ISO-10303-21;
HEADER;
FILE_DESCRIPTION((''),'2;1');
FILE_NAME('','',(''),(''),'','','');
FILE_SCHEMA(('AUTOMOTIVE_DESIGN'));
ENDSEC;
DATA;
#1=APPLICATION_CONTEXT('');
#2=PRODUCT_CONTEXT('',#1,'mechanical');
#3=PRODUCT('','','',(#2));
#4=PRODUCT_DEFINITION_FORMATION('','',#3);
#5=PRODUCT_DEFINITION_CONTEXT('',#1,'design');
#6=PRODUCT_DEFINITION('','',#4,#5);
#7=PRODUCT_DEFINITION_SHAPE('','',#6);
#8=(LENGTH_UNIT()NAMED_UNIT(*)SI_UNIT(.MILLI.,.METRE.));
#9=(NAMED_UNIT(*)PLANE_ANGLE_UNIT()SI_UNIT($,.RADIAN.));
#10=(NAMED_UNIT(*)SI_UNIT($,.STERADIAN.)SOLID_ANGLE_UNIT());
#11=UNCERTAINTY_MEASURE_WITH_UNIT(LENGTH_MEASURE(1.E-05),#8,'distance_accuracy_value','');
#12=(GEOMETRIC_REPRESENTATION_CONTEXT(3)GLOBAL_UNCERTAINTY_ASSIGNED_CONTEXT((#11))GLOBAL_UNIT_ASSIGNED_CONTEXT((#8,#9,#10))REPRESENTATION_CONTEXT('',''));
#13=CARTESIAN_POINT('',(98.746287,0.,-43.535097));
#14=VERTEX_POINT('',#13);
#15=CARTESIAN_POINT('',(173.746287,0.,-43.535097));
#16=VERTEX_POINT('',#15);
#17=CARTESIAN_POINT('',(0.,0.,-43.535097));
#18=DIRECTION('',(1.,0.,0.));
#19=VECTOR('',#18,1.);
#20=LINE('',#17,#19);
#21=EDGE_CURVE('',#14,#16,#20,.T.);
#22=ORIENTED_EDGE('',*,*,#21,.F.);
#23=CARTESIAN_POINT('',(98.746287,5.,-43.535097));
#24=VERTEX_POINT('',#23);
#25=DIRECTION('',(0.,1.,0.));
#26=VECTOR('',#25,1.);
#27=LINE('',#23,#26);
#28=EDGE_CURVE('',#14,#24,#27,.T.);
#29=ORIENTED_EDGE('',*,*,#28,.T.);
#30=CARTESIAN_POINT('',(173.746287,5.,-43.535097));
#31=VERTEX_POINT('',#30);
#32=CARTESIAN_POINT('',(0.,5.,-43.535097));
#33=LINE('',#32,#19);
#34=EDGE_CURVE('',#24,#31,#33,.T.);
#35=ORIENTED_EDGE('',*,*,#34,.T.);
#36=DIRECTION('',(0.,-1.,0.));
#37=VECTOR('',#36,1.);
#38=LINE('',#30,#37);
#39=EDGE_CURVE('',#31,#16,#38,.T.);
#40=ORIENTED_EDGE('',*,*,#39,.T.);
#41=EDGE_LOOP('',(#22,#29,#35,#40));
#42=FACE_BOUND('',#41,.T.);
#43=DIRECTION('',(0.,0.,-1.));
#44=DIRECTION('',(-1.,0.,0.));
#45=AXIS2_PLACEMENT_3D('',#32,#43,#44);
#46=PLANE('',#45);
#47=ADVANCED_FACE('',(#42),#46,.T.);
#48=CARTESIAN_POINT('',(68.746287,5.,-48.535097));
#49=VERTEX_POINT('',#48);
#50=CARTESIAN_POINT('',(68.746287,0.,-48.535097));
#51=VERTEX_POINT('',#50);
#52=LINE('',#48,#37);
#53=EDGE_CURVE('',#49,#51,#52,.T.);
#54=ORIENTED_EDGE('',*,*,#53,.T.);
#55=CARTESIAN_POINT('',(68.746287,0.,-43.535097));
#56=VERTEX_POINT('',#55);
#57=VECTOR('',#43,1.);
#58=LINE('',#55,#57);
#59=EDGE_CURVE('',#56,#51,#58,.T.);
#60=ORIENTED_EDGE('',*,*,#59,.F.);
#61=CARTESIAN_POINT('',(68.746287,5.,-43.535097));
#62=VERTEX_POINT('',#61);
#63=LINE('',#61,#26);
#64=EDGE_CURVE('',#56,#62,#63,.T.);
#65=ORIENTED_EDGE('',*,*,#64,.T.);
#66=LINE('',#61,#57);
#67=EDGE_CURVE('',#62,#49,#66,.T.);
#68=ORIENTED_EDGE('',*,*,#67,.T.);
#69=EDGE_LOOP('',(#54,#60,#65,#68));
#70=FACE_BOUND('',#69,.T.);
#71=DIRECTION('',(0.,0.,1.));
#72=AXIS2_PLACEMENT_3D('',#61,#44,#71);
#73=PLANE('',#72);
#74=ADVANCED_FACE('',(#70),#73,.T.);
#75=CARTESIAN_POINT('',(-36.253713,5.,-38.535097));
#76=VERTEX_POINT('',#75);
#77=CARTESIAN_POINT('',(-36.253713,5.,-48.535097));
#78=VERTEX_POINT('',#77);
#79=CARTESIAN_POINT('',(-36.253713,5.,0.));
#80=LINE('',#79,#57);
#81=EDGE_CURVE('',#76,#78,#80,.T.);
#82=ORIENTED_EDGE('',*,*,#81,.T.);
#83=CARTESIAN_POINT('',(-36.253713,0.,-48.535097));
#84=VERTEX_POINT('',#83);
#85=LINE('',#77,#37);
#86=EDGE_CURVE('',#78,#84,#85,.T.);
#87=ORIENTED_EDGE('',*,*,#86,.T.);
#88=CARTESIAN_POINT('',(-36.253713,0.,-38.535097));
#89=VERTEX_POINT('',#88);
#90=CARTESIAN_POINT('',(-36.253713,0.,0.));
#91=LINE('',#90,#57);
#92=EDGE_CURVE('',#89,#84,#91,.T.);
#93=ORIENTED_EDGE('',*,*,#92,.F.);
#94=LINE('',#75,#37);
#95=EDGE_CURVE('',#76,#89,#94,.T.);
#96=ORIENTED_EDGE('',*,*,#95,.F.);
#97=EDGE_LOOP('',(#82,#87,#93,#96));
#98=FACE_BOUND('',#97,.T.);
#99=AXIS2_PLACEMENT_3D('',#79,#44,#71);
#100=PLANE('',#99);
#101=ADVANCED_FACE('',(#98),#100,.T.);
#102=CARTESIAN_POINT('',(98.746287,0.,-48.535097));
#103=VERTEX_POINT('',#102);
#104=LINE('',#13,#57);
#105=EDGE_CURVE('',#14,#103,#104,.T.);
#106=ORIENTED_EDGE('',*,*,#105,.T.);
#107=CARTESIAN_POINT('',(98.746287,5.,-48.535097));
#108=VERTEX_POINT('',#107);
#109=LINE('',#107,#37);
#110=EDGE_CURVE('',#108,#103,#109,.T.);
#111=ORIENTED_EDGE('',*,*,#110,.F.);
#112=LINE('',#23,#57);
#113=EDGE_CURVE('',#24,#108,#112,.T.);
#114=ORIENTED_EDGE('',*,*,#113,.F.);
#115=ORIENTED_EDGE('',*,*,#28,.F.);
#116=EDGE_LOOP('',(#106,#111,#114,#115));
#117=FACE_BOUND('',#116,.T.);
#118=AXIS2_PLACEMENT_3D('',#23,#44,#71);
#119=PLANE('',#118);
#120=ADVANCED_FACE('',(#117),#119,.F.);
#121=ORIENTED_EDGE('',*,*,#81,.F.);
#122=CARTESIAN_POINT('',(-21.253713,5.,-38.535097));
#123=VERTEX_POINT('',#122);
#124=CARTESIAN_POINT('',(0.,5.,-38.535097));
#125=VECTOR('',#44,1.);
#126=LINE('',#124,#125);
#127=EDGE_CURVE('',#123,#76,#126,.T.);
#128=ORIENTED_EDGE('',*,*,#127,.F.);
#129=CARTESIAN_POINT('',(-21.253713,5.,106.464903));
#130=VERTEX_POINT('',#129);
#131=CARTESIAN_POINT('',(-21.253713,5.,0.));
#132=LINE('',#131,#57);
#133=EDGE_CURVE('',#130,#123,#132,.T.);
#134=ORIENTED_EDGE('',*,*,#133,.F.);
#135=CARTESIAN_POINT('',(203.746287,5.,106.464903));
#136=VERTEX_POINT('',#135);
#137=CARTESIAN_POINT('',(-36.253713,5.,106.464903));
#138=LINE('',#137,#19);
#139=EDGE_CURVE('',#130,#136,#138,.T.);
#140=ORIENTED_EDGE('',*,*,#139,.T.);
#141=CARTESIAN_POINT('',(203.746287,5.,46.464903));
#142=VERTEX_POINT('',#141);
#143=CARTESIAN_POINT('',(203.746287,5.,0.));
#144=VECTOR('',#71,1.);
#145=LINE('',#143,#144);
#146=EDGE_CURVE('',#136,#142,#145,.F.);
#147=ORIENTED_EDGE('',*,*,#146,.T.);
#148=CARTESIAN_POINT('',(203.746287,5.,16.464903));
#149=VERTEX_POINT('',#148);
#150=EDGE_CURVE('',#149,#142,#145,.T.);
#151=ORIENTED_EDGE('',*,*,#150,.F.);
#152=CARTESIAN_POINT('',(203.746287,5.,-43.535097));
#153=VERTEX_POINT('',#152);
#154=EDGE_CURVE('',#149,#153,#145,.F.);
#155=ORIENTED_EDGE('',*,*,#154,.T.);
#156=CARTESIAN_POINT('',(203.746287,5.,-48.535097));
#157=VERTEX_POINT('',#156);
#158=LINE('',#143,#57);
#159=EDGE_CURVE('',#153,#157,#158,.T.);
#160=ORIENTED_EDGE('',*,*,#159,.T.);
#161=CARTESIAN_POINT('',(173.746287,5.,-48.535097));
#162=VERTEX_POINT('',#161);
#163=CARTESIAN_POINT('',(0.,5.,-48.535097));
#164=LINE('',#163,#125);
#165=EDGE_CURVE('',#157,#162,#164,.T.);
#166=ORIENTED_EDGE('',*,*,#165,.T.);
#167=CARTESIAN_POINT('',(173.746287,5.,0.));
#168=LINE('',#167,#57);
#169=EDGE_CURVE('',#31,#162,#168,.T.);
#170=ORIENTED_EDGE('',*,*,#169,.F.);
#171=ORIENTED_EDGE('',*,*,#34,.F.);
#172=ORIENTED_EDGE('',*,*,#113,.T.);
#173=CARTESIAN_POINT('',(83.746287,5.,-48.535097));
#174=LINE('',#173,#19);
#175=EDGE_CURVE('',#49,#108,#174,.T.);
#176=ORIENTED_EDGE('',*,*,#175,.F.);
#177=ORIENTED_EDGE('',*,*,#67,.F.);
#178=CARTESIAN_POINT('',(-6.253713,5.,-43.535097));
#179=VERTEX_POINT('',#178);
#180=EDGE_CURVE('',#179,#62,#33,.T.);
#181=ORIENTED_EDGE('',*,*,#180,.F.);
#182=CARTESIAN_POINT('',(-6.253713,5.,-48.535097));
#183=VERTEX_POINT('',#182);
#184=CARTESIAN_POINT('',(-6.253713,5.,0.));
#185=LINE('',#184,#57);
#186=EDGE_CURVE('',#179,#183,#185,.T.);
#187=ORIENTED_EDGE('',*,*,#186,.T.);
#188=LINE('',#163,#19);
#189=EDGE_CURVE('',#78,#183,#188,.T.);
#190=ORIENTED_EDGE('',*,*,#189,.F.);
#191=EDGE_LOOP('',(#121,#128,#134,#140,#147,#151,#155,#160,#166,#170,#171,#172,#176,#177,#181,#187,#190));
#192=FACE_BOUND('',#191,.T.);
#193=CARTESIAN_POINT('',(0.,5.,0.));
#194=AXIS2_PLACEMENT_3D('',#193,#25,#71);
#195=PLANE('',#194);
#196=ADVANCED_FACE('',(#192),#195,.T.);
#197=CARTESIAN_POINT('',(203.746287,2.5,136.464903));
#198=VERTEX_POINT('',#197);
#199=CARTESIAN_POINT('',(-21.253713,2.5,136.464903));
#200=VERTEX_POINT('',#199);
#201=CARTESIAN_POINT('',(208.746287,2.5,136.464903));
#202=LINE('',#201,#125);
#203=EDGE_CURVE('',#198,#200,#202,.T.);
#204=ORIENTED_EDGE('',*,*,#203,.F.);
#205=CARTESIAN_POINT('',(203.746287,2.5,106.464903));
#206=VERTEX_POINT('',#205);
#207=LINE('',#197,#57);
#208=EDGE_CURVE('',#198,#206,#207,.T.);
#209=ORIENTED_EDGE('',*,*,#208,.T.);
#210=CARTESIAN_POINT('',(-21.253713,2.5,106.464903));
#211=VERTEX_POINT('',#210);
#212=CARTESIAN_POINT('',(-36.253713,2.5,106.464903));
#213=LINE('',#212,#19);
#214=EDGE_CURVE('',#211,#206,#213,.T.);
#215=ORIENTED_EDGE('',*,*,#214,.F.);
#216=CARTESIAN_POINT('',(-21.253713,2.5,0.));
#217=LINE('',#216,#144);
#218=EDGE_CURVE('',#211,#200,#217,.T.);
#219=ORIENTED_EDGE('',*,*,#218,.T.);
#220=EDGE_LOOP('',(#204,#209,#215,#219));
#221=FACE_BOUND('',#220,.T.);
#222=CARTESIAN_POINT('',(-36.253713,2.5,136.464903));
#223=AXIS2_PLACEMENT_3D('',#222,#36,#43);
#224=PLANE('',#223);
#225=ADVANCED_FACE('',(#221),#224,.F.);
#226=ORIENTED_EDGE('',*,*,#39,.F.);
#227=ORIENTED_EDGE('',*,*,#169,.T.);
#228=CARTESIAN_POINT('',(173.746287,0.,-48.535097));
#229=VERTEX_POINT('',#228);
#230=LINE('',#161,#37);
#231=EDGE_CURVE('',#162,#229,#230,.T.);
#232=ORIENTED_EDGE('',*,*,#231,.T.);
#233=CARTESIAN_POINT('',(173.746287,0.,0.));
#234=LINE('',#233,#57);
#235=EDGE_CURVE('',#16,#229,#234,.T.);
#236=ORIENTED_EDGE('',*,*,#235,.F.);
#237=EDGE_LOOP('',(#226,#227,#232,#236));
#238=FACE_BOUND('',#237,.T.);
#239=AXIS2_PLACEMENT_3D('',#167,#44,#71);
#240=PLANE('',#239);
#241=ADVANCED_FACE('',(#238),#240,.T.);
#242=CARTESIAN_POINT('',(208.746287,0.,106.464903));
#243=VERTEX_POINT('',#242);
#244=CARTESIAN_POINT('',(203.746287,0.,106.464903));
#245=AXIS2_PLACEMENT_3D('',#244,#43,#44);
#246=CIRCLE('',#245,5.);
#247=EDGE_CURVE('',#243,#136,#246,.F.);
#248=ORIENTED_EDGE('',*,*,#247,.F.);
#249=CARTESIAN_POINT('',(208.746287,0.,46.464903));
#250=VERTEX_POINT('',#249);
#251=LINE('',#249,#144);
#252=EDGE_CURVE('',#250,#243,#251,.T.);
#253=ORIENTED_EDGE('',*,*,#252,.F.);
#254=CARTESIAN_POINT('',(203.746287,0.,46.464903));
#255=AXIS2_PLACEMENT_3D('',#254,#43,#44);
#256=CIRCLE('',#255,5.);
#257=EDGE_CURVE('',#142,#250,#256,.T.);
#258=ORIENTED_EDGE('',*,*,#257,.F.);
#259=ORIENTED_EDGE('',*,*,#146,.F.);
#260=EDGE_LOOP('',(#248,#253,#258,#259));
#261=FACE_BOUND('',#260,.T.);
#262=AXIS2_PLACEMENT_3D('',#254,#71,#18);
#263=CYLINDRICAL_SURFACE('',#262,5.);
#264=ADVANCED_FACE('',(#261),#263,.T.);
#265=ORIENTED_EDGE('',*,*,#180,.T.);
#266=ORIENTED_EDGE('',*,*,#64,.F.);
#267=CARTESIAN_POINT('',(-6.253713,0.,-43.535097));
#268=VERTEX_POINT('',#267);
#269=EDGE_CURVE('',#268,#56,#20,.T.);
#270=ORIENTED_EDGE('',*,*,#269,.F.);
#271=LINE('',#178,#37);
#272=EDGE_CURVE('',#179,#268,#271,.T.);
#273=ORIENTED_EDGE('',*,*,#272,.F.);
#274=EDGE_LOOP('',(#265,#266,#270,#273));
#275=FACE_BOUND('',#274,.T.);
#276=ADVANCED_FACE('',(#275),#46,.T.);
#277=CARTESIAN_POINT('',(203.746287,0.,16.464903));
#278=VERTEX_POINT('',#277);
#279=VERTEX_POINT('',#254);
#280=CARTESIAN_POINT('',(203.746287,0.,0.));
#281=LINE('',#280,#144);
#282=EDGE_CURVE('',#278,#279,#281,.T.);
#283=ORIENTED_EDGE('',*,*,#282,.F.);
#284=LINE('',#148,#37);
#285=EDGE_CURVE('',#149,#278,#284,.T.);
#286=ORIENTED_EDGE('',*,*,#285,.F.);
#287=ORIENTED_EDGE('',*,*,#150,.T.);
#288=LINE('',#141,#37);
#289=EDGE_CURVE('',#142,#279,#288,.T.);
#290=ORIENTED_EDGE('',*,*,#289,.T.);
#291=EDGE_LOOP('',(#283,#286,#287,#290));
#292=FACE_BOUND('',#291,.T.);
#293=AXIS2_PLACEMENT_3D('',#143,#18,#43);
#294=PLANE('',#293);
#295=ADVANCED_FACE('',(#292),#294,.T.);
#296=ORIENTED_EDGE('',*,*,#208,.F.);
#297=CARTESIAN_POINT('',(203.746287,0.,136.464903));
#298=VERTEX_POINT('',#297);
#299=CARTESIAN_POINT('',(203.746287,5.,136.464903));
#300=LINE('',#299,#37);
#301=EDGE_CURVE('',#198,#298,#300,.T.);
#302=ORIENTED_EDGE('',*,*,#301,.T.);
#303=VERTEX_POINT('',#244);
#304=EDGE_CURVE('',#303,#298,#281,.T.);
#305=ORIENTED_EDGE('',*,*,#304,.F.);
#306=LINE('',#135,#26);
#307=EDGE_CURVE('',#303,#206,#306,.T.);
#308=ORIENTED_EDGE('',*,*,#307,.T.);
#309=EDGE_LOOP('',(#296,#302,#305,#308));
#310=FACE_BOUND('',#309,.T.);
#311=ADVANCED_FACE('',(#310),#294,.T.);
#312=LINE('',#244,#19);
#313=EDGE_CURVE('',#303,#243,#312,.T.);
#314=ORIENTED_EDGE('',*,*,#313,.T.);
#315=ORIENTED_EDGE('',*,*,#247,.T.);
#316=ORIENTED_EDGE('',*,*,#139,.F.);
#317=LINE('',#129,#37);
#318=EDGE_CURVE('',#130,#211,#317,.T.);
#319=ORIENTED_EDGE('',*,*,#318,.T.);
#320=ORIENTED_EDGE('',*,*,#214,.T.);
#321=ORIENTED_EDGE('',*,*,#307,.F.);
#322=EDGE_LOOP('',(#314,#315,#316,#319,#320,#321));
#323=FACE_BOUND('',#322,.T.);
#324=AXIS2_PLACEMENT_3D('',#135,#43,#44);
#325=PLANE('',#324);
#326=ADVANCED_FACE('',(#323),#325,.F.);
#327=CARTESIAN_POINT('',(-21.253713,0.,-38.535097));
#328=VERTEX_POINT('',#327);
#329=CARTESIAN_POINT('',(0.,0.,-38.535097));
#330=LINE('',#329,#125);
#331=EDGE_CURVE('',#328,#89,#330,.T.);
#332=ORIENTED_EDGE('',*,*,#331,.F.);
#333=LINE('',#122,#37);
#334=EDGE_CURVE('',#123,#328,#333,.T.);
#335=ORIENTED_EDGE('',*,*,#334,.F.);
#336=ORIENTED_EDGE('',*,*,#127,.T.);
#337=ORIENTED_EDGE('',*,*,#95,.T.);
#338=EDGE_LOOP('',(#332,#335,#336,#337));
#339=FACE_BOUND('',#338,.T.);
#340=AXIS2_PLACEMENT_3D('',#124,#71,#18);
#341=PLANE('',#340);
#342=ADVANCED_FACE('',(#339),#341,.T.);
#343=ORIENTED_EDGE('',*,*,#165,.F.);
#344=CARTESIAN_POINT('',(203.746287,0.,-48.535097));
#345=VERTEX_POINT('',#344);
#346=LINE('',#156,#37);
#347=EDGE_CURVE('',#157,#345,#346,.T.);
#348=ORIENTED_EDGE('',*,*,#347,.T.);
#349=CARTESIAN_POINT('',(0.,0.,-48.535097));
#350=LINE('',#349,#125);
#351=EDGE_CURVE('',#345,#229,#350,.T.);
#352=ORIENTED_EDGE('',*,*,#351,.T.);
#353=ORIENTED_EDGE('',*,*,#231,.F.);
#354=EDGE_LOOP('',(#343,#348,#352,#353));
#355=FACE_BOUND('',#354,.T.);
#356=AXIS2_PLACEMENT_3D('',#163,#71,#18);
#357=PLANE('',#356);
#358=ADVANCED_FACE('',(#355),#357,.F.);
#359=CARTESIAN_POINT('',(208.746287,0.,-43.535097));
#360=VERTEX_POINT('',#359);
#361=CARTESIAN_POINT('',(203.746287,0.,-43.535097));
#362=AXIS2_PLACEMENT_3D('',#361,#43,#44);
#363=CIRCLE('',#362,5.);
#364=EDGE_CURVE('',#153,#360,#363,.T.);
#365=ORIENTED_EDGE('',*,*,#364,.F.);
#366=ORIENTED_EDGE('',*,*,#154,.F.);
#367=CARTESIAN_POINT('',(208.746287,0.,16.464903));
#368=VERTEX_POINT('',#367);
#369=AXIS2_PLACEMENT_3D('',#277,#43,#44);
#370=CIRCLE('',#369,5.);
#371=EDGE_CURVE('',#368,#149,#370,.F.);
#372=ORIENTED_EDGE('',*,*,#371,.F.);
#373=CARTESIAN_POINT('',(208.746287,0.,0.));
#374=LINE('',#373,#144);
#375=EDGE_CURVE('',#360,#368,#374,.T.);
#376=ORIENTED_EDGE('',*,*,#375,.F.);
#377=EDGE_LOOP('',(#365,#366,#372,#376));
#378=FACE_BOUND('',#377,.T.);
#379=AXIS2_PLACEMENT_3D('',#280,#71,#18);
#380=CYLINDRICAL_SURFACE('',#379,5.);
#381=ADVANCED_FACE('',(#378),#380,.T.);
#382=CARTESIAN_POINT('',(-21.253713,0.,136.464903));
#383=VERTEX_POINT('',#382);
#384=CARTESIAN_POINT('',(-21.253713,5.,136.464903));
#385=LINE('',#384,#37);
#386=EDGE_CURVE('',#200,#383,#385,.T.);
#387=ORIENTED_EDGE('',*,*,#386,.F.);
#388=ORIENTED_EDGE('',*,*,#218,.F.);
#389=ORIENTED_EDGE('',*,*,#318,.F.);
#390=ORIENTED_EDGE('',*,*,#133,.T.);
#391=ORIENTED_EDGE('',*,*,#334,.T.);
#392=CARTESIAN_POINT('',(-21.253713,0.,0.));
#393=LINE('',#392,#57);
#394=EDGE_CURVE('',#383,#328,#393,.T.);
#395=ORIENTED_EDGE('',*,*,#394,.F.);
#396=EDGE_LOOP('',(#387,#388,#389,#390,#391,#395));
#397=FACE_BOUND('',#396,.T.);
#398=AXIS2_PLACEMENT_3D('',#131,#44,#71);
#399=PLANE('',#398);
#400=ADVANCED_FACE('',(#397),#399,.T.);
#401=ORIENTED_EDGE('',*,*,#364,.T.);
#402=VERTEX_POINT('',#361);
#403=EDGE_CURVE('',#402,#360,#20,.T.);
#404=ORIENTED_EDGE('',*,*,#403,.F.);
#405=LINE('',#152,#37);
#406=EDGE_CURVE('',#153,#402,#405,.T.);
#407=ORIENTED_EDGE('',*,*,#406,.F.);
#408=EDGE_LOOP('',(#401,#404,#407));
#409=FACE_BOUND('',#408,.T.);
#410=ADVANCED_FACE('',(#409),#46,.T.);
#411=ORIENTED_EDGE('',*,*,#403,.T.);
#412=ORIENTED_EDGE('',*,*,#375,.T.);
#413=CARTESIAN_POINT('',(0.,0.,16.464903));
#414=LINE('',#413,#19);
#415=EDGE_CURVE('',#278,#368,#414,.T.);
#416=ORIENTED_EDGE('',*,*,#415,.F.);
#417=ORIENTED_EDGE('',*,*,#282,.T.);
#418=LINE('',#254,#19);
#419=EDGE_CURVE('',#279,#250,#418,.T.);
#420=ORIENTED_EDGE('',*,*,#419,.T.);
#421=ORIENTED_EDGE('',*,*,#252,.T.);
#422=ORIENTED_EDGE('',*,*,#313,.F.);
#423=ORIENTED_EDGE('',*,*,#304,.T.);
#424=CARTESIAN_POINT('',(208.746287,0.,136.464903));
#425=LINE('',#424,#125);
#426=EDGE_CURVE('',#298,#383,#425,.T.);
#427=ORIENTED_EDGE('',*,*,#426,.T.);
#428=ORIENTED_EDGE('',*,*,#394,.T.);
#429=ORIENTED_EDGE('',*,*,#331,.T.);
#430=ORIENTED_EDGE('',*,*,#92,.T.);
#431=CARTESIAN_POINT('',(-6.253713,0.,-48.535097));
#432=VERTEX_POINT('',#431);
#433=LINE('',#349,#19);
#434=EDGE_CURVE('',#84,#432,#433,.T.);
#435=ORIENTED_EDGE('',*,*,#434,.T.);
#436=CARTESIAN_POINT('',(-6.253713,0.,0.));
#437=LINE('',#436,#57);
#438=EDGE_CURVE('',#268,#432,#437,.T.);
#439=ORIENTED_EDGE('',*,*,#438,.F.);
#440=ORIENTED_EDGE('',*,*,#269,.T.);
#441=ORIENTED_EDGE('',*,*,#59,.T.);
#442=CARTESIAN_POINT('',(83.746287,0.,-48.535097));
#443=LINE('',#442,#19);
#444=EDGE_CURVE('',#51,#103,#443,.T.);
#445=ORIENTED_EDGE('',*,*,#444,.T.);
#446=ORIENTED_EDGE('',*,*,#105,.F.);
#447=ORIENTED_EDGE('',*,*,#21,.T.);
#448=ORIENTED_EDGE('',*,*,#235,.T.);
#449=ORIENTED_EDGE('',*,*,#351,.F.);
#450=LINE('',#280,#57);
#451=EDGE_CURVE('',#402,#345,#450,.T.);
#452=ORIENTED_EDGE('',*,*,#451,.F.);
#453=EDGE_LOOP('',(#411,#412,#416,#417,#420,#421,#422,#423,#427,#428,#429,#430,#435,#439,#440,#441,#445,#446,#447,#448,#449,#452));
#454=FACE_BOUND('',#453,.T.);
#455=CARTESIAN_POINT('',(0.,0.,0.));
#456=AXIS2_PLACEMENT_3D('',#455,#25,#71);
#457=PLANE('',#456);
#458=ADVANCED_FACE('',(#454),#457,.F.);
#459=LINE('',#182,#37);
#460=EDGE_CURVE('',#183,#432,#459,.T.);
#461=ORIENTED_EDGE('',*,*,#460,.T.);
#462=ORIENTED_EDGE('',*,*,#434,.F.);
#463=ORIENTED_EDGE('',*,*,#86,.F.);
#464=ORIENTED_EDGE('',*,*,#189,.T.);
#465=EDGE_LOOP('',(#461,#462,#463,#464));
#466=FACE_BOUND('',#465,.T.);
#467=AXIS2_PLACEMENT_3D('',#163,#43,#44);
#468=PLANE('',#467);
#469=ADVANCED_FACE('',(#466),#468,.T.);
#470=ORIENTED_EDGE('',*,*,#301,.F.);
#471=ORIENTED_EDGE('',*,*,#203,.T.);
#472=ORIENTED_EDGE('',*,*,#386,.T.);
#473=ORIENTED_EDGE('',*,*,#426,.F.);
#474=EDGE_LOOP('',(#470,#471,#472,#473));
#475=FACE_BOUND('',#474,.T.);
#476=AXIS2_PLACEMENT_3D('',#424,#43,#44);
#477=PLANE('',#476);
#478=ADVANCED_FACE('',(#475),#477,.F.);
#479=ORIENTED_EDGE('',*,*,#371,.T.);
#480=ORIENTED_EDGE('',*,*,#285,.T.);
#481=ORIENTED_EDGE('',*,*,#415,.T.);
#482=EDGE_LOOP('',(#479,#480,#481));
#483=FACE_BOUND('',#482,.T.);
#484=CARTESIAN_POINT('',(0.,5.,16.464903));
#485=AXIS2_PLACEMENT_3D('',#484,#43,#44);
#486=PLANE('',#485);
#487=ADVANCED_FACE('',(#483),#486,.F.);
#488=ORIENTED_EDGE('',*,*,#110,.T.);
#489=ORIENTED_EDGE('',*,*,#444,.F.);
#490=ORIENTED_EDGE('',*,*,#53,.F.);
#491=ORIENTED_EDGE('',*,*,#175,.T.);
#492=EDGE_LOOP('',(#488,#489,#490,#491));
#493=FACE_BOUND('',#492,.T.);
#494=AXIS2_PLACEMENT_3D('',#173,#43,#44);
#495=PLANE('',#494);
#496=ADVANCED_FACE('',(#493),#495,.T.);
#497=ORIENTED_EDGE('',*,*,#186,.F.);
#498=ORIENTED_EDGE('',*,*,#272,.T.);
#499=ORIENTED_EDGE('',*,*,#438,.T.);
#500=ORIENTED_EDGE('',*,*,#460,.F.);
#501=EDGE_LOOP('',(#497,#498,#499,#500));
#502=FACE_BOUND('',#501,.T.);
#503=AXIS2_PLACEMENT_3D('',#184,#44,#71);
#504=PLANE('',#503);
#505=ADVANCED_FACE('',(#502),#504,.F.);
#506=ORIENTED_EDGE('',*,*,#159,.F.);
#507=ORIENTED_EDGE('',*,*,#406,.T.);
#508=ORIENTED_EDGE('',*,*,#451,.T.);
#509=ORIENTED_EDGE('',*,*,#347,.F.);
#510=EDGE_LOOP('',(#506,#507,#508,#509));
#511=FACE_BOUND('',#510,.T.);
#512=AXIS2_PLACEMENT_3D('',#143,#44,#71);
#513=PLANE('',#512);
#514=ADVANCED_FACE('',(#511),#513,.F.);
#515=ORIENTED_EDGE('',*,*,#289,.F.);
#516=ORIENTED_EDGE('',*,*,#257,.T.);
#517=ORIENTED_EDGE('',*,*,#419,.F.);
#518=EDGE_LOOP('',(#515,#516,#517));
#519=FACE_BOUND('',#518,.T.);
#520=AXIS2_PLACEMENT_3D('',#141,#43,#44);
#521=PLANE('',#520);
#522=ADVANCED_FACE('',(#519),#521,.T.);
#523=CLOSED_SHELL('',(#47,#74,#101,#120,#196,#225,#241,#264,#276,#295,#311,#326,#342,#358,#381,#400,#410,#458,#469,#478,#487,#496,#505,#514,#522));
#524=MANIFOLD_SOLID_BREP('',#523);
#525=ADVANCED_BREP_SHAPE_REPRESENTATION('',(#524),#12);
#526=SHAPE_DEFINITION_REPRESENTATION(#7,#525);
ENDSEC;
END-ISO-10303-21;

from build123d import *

# Parameters (mm, degrees)
SKETCH_1_W          = 5
SKETCH_1_H          = 60
SKETCH_1_W_2        = 30
SKETCH_1_H_2        = 5
SKETCH_1_W_3        = 15
EXTRUDE_1_DEPTH     = 5
FILLET_1_R          = 5
SKETCH_2_W          = 239.490005879
SKETCH_2_H          = 154.751616696
CUT_EXTRUDE_1_DEPTH = 355.488579047
SKETCH_3_W          = 30
SKETCH_3_H          = 2.5
CUT_EXTRUDE_2_DEPTH = 277.129805813


with BuildPart() as part:
    # 草圖1 → 填料-伸長1 (new body)
    with BuildSketch(Plane(origin=(0, 0, 0), x_dir=(1, 0, 0), z_dir=(0, 1, 0))):
        Polygon((198.746286718, -286.464902661), (198.746286718, -256.464902661), (183.246286718, -256.464902661), (183.246286718, -266.464902661), (124.746286718, -266.464902661), (124.746286718, -262.464902661), (109.246286718, -262.464902661), (109.246286718, -266.464902661), (-21.253713282, -266.464902661), (-21.253713282, 38.535097339), (-36.253713282, 38.535097339), (-36.253713282, 43.535097339), (203.746286718, 43.535097339), (203.746286718, -286.464902661), align=None)
        with Locations((206.246286718, -256.464902661)):
            Rectangle(SKETCH_1_W, SKETCH_1_H)
        with Locations((206.246286718, 13.535097339)):
            Rectangle(SKETCH_1_W, SKETCH_1_H)
        with Locations((188.746286718, 46.035097339)):
            Rectangle(SKETCH_1_W_2, SKETCH_1_H_2)
        with Locations((-21.253713282, 46.035097339)):
            Rectangle(SKETCH_1_W_2, SKETCH_1_H_2)
        with Locations((91.246286718, 46.035097339)):
            Rectangle(SKETCH_1_W_3, SKETCH_1_H_2)
        with Locations((76.246286718, 46.035097339)):
            Rectangle(SKETCH_1_W_3, SKETCH_1_H_2)
        with Locations((206.246286718, -166.464902661)):
            Rectangle(SKETCH_1_W, SKETCH_1_H)
        with Locations((206.246286718, -76.464902661)):
            Rectangle(SKETCH_1_W, SKETCH_1_H)
    extrude(amount=EXTRUDE_1_DEPTH)

    # 圓角1
    fillet_1_edges = [part.edges().sort_by_distance(p)[0] for p in [
        (208.746286718, 5, -13.535097339),
        (208.746286718, 5, 76.464902661),
        (208.746286718, 5, 166.464902661),
        (208.746286718, 5, 256.464902661),
    ]]
    fillet(fillet_1_edges, radius=FILLET_1_R - 0.0001)  # a hair under: the kernel refuses the full size

    # 草圖2 → 除料-伸長1 (cut, through all)
    with BuildSketch(Plane(origin=(0, 5, 0), x_dir=(1, 0, 0), z_dir=(0, 1, 0))):
        with Locations((89.001283779, -213.840711009)):
            Rectangle(SKETCH_2_W, SKETCH_2_H)
    extrude(amount=-CUT_EXTRUDE_1_DEPTH, mode=Mode.SUBTRACT)

    # 草圖3 → 除料-伸長2 (cut, through all)
    with BuildSketch(Plane(origin=(203.746286718, 0, 0), x_dir=(0, 0, -1), z_dir=(1, 0, 0))):
        with Locations((-121.464902661, 3.75)):
            Rectangle(SKETCH_3_W, SKETCH_3_H)
    extrude(amount=-CUT_EXTRUDE_2_DEPTH, mode=Mode.SUBTRACT)


solid = part.part
